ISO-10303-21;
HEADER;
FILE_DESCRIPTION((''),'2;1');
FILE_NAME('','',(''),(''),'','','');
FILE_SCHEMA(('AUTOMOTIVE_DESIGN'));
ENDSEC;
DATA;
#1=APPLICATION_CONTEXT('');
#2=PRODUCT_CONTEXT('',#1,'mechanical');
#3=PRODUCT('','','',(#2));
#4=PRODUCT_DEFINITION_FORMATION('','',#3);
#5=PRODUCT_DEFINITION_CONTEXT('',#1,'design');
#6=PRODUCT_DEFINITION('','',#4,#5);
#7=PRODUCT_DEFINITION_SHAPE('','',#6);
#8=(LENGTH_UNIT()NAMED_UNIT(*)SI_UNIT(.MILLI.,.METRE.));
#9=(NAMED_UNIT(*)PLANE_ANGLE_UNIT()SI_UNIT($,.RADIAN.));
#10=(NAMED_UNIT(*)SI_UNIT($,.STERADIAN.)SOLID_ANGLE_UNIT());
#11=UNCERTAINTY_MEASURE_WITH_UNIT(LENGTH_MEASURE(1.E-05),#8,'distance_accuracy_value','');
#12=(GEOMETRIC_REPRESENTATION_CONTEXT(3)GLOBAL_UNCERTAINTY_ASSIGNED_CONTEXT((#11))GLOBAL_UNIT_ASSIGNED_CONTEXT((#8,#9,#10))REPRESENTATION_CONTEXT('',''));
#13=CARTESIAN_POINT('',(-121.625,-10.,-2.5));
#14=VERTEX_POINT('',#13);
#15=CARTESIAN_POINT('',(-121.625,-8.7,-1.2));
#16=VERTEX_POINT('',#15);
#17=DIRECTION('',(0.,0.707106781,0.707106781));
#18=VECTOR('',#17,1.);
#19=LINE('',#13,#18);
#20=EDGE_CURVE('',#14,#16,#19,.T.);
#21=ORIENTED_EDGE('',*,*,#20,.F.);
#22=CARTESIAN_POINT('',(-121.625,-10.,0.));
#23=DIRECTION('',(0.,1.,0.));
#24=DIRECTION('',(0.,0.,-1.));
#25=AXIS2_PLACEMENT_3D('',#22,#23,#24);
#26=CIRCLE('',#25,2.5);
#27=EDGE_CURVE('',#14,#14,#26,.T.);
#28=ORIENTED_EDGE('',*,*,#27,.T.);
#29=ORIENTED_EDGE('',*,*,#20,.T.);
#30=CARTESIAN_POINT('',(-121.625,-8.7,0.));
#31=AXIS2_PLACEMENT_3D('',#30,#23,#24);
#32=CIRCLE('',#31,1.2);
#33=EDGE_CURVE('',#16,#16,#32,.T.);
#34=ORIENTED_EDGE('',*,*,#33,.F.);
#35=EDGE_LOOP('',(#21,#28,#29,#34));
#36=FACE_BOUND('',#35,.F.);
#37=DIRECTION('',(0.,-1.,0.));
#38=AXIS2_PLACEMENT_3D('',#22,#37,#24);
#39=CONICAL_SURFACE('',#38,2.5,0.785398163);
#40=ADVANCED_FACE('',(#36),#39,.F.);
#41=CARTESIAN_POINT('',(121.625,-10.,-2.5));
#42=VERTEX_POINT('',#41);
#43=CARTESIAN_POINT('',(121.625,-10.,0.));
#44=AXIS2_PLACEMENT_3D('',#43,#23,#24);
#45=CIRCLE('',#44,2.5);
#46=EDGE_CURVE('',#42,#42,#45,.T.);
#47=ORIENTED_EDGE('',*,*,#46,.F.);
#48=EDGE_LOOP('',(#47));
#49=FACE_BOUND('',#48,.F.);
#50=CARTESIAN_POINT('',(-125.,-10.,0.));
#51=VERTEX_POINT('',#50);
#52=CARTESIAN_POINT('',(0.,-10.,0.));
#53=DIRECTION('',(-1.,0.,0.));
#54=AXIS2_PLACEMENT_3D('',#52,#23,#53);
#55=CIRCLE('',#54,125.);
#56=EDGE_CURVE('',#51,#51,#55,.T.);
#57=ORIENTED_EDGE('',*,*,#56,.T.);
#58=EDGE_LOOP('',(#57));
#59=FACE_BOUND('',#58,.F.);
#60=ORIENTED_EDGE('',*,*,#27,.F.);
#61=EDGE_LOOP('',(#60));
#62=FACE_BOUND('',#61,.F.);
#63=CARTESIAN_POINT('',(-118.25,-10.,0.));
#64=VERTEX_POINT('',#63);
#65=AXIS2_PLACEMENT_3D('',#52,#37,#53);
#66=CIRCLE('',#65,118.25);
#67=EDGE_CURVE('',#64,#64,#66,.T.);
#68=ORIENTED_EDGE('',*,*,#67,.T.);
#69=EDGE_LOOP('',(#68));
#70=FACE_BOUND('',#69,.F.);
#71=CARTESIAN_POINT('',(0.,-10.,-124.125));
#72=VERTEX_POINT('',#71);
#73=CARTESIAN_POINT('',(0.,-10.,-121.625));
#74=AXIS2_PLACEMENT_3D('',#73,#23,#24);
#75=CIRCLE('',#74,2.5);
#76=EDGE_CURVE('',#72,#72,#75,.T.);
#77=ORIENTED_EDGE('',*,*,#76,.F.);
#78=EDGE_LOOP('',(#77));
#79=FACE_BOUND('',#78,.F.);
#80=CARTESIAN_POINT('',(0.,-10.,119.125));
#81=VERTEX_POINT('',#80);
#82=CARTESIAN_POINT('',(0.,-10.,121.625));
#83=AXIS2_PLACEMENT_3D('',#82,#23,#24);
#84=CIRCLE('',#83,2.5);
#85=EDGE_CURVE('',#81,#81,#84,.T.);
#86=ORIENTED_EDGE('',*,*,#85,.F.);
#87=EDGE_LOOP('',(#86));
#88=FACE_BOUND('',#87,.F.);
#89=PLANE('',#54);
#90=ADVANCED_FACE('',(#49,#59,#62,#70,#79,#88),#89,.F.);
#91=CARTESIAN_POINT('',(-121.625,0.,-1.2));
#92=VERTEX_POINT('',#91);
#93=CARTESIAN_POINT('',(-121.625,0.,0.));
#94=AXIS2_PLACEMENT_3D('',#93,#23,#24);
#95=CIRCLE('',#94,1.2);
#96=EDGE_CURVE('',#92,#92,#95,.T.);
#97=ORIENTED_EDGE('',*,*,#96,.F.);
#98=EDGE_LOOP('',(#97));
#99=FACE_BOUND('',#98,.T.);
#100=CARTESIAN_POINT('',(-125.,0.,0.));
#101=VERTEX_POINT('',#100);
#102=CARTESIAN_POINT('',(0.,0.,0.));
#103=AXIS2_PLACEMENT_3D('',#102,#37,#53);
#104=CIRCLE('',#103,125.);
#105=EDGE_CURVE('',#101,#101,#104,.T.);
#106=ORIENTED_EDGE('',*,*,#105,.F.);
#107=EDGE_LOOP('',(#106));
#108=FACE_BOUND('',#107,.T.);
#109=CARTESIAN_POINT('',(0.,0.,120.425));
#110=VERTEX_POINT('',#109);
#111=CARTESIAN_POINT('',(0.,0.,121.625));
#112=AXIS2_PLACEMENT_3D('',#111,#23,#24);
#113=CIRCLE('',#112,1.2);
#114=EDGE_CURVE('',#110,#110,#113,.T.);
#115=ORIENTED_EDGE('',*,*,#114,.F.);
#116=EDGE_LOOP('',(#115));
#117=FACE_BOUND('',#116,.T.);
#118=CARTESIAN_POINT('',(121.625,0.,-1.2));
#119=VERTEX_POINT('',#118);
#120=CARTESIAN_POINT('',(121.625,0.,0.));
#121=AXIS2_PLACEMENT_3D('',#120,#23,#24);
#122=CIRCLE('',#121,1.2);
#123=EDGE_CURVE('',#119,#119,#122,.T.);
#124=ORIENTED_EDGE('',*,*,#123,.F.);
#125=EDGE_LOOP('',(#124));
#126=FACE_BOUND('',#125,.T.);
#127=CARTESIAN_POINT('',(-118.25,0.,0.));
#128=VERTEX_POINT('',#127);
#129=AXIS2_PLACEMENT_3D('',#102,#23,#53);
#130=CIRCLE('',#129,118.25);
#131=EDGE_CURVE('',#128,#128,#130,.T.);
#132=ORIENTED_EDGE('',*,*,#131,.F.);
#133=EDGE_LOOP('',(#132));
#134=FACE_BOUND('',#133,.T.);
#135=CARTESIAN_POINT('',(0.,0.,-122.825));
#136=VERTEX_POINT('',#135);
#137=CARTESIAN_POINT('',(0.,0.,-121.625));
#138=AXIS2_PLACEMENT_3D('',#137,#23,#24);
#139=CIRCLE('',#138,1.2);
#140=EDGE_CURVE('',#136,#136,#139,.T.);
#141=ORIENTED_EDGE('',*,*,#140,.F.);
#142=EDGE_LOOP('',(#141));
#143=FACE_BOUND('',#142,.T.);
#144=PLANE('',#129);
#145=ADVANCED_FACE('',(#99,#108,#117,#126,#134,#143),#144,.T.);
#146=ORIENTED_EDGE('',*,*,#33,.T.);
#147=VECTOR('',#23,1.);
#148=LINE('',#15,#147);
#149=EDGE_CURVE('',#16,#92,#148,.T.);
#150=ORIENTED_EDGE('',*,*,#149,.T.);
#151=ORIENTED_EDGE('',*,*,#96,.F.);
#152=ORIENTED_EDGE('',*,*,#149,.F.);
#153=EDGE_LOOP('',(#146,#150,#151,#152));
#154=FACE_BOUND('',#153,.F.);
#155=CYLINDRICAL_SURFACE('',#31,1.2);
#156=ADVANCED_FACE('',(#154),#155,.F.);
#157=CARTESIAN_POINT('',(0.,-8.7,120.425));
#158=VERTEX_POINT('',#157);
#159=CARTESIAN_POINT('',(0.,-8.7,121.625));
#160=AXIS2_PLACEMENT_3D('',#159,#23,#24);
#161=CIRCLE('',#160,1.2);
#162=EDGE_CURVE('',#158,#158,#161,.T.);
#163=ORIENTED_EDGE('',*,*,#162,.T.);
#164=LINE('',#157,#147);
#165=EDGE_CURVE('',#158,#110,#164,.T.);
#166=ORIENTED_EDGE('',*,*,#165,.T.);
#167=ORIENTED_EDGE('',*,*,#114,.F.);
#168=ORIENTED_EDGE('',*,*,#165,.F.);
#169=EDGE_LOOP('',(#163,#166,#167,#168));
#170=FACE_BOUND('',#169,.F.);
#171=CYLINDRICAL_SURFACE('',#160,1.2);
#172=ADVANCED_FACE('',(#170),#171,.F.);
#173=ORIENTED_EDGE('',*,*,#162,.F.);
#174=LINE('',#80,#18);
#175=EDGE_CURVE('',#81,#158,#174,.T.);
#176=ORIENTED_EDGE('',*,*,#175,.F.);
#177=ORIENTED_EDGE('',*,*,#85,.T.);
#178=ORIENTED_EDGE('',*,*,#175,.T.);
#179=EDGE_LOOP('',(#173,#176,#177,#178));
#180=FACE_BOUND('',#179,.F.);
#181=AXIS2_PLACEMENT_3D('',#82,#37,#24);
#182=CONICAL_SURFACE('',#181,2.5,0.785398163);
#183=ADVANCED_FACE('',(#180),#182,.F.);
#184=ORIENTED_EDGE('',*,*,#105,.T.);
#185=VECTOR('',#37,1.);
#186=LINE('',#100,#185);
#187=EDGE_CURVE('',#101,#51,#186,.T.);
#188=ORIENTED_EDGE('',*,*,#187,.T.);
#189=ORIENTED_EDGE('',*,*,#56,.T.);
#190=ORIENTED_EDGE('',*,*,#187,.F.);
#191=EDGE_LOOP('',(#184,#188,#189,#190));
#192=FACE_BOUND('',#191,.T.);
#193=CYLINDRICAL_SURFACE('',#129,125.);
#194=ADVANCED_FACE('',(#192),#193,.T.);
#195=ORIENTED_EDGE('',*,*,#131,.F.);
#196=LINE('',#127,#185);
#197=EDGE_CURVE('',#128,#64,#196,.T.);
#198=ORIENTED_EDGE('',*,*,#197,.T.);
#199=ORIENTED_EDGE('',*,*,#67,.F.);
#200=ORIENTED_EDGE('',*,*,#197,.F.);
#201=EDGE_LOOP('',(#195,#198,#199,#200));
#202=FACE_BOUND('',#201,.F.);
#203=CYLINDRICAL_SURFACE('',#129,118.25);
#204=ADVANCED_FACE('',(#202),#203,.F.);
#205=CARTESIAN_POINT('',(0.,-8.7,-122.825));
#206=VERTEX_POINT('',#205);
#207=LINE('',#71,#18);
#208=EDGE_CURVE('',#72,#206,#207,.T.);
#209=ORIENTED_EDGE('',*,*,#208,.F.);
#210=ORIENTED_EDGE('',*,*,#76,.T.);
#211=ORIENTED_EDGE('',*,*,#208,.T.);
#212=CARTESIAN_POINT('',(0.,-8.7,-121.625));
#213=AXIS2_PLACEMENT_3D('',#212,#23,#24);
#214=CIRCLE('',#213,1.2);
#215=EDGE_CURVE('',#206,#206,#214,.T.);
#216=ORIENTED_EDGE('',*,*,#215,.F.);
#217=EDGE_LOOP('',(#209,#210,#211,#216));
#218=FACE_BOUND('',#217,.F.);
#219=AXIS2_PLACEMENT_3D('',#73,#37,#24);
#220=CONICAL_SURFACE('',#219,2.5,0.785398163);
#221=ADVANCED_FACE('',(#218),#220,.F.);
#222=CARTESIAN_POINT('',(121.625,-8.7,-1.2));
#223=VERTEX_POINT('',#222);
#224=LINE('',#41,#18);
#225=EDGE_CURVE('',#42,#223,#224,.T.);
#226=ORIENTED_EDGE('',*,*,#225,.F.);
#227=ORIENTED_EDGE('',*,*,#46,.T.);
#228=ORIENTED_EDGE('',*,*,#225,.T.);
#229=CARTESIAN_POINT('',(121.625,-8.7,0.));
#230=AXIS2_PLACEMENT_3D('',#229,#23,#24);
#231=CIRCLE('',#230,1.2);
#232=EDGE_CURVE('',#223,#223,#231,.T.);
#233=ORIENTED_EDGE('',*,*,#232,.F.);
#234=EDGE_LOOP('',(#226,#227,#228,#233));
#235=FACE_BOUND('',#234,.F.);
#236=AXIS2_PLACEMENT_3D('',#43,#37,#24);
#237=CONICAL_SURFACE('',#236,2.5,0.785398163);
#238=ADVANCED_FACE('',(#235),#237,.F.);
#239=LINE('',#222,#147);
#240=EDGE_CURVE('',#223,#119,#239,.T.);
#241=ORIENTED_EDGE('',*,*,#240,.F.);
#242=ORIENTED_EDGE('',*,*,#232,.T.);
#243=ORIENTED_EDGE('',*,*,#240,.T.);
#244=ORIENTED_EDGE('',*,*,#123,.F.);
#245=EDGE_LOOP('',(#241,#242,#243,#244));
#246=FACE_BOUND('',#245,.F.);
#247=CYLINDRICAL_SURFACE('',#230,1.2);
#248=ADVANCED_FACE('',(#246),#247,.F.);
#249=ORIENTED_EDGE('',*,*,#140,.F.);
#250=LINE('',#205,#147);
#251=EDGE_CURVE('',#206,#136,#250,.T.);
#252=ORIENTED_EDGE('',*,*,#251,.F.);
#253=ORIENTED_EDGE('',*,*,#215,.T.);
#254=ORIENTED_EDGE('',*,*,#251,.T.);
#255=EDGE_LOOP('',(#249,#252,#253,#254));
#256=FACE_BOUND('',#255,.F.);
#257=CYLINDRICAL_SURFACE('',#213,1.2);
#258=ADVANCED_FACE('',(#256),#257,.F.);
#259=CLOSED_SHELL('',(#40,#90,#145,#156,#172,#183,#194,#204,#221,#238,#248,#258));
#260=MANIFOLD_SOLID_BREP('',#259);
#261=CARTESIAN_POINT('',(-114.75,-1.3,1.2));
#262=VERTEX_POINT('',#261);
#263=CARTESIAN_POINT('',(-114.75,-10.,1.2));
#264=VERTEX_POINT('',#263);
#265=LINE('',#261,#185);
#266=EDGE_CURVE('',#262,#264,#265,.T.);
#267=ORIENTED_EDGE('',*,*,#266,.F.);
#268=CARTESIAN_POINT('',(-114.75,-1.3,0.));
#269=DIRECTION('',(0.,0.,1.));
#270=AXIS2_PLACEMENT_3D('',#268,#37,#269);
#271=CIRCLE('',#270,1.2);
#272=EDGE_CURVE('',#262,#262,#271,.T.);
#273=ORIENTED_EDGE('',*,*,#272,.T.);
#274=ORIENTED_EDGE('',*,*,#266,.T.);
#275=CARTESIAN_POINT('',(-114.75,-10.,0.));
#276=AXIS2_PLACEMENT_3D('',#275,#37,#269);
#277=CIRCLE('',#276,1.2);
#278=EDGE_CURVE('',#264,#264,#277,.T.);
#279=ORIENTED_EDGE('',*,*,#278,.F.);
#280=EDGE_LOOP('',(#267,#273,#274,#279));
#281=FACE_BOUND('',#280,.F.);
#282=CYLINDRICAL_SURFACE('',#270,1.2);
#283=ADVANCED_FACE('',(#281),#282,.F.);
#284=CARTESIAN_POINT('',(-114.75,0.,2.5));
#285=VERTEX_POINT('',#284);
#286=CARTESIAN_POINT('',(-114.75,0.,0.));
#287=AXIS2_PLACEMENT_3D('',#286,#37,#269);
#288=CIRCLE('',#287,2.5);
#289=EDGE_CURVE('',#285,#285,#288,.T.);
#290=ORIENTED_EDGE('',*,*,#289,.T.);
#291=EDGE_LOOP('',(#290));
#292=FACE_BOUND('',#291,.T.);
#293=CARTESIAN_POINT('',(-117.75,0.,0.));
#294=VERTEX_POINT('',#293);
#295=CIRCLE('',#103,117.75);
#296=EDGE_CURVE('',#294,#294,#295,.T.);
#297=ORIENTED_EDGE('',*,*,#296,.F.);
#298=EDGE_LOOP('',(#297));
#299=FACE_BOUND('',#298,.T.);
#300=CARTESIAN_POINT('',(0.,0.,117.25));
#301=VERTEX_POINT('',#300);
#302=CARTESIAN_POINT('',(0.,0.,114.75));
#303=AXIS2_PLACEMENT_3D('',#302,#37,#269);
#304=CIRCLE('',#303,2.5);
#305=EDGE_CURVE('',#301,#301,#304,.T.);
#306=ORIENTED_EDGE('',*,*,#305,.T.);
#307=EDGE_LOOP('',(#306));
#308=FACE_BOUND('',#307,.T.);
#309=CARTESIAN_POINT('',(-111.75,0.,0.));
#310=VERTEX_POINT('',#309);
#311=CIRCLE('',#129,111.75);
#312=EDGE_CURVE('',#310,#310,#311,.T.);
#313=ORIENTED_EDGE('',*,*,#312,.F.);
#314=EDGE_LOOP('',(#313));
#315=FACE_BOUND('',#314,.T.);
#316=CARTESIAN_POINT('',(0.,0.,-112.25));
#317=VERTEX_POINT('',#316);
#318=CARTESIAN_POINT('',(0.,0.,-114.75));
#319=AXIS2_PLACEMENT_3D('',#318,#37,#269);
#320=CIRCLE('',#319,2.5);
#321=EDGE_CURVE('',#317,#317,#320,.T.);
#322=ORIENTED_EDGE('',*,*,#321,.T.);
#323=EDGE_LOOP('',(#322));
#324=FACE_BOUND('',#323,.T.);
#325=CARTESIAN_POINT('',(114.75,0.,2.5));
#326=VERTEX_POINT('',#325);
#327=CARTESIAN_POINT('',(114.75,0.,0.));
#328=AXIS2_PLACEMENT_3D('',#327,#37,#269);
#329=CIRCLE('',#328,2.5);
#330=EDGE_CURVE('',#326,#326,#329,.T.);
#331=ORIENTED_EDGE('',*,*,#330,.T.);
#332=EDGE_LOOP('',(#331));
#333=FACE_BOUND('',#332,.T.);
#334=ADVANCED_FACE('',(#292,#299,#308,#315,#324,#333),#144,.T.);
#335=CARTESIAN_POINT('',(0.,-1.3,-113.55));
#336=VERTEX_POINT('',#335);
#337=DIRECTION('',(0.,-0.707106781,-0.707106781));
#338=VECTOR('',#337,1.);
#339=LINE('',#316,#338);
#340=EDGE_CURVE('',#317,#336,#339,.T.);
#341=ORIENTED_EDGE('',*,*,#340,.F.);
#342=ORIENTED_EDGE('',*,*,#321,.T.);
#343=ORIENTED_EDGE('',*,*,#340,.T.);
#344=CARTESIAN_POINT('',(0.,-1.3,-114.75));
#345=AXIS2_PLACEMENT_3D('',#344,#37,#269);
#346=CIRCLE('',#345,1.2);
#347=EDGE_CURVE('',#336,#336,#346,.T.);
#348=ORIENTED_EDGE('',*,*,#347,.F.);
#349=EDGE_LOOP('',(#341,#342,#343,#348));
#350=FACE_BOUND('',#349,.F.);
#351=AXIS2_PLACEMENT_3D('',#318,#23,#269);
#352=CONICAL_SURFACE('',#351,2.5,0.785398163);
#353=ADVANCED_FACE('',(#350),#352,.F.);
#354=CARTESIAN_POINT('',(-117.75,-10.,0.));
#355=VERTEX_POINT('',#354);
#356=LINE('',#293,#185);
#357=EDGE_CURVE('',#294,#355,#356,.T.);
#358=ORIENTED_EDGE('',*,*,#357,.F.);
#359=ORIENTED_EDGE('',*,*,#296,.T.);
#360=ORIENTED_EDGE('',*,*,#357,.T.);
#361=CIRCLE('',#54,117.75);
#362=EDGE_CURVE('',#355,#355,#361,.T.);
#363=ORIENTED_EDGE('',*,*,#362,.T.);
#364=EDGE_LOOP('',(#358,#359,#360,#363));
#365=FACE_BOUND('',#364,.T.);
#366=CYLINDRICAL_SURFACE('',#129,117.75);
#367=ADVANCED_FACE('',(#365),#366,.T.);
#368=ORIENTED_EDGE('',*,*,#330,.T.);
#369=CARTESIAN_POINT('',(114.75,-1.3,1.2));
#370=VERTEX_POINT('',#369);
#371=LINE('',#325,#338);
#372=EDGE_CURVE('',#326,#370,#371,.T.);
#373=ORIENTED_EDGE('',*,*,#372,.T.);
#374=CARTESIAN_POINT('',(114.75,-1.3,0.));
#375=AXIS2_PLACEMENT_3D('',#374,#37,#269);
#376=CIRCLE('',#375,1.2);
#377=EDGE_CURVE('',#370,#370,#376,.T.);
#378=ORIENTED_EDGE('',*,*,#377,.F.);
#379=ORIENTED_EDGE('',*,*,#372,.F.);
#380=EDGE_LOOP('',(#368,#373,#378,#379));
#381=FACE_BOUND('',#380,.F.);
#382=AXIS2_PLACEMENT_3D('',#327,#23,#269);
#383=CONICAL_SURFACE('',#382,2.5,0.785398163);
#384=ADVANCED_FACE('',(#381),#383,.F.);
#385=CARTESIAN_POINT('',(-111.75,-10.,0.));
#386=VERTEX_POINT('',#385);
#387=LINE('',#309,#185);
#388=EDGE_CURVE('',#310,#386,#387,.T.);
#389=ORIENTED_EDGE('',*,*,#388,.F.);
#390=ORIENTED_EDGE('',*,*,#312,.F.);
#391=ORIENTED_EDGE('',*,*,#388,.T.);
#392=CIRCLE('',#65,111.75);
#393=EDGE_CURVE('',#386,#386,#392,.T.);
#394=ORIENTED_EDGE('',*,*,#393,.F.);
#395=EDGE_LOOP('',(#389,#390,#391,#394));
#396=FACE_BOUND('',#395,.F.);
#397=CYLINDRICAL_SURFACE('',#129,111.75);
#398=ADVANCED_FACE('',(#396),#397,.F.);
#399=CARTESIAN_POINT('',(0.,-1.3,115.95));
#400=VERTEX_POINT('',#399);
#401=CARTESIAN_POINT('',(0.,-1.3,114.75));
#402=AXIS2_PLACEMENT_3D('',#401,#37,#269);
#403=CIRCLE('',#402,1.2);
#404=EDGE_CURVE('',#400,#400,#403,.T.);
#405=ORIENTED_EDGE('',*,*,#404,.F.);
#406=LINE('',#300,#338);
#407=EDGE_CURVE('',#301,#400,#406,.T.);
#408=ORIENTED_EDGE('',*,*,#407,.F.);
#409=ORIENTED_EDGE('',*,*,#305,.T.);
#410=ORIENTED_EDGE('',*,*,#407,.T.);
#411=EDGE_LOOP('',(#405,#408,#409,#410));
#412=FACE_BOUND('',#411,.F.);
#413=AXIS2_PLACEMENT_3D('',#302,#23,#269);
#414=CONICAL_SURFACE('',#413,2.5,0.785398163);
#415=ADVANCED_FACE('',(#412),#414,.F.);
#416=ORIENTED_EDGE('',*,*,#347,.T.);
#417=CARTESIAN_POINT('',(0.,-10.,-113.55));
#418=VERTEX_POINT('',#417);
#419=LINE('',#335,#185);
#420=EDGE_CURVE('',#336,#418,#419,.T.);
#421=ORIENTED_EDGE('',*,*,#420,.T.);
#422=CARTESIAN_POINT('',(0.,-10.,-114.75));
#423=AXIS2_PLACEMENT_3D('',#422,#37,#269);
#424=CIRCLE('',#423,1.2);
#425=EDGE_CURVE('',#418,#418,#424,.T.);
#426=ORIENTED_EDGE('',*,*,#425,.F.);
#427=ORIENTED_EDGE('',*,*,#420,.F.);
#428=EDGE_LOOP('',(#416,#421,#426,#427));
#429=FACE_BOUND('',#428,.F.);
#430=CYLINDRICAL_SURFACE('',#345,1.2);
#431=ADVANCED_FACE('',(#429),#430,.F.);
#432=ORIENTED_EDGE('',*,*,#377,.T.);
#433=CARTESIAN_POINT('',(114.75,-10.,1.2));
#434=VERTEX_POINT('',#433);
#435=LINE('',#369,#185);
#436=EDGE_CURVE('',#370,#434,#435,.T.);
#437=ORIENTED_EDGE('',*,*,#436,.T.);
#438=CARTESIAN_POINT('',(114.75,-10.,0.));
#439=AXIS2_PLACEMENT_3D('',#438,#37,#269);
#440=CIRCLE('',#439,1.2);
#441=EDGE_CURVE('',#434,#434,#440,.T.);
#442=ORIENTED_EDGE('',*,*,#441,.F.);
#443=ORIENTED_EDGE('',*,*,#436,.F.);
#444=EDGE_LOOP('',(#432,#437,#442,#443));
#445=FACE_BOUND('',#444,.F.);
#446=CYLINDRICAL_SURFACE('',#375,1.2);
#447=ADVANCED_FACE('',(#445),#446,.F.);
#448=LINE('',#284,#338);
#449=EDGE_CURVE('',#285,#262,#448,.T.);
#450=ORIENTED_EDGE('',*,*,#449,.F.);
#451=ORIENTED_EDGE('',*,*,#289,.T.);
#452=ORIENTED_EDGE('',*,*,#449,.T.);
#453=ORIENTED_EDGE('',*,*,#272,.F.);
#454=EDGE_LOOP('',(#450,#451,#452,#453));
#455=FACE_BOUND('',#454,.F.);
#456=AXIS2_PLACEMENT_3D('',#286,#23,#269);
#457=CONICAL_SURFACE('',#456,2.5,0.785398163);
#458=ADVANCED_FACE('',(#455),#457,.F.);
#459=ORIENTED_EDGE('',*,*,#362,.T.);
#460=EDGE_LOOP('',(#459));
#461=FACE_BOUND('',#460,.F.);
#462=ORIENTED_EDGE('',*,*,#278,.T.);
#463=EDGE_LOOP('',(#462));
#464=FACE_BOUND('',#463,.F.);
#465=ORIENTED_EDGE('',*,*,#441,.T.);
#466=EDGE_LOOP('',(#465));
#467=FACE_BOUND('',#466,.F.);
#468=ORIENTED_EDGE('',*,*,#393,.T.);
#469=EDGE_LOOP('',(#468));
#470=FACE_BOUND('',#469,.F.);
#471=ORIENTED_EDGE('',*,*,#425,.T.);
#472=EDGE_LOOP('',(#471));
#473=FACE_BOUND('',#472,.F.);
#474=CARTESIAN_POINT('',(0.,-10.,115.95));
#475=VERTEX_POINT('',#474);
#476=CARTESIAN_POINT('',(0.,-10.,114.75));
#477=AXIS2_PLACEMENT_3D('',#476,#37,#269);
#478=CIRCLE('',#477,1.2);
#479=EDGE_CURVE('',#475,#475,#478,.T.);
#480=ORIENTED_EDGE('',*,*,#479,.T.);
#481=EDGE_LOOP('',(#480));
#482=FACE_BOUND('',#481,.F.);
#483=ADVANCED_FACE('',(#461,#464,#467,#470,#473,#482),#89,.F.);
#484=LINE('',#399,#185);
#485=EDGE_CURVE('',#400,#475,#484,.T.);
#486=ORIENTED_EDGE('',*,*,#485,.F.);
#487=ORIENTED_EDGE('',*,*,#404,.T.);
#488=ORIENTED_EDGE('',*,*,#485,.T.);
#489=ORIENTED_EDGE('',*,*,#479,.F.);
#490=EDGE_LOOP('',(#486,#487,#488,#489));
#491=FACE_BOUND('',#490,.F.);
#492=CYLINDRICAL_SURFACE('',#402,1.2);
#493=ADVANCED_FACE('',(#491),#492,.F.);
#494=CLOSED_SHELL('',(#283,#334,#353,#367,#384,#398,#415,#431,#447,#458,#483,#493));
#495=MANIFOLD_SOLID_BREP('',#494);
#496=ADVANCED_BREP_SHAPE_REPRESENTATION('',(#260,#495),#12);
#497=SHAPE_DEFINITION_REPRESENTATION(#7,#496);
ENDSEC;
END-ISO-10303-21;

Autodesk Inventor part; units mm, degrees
ref_plane "YZ Plane" through (0, 0, 0) normal (1, 0, 0) x (0, 1, 0)
ref_plane "XZ Plane" through (0, 0, 0) normal (0, 1, 0) x (-1, 0, 0)
ref_plane "XY Plane" through (0, 0, 0) normal (0, 0, 1) x (1, 0, 0)
sketch "Sketch1" plane through (0, 0, 0) normal (0, 1, 0) x (-1, 0, 0)
  circle A0 centre (0, 0) radius 111.75
  circle A1 centre (0, 0) radius 125
  circle A2 centre (0, 0) radius 117.75
  circle A3 centre (0, 0) radius 118.25
  line L0 (-111.75, 0) -> (-117.75, 0)
  line L1 (-118.25, 0) -> (-125, 0)
  point P0 (-114.75, 0)
  point P1 (-121.625, 0)
  point P2 (0, -121.625)
  point P3 (0, -114.75)
  point P4 (121.625, 0)
  point P5 (114.75, 0)
  point P6 (0, 121.625)
  point P7 (0, 114.75)
  dimension "d0" = 223.5
  dimension "d1" = 250
  dimension "d2" = 235.5
  dimension "d3" = 236.5
  dimension "d34" = 360
extrude "Extrusion1" add sketch "Sketch1" against normal blind 10
hole "Hole3" at (114.75, 0, 0) at (0, 0, -114.75) at (0, 0, 114.75) at (-114.75, 0, 0) direction (0, -1, 0) diameter 2.4 end through all countersink diameter 5 countersink angle 90
sketch "Sketch3" plane through (0, -10, 0) normal (0, -1, 0) x (1, 0, 0)
  point P0 (0, 0)
  point P1 (0, -121.625)
  point P2 (121.625, 0)
  point P3 (0, 121.625)
  point P4 (-121.625, 0)
hole "Hole4" at (0, -10, -121.625) at (121.625, -10, 0) at (0, -10, 121.625) at (-121.625, -10, 0) direction (0, 1, 0) diameter 2.4 end through all countersink diameter 5 countersink angle 90
properties part number "bearing_table"
